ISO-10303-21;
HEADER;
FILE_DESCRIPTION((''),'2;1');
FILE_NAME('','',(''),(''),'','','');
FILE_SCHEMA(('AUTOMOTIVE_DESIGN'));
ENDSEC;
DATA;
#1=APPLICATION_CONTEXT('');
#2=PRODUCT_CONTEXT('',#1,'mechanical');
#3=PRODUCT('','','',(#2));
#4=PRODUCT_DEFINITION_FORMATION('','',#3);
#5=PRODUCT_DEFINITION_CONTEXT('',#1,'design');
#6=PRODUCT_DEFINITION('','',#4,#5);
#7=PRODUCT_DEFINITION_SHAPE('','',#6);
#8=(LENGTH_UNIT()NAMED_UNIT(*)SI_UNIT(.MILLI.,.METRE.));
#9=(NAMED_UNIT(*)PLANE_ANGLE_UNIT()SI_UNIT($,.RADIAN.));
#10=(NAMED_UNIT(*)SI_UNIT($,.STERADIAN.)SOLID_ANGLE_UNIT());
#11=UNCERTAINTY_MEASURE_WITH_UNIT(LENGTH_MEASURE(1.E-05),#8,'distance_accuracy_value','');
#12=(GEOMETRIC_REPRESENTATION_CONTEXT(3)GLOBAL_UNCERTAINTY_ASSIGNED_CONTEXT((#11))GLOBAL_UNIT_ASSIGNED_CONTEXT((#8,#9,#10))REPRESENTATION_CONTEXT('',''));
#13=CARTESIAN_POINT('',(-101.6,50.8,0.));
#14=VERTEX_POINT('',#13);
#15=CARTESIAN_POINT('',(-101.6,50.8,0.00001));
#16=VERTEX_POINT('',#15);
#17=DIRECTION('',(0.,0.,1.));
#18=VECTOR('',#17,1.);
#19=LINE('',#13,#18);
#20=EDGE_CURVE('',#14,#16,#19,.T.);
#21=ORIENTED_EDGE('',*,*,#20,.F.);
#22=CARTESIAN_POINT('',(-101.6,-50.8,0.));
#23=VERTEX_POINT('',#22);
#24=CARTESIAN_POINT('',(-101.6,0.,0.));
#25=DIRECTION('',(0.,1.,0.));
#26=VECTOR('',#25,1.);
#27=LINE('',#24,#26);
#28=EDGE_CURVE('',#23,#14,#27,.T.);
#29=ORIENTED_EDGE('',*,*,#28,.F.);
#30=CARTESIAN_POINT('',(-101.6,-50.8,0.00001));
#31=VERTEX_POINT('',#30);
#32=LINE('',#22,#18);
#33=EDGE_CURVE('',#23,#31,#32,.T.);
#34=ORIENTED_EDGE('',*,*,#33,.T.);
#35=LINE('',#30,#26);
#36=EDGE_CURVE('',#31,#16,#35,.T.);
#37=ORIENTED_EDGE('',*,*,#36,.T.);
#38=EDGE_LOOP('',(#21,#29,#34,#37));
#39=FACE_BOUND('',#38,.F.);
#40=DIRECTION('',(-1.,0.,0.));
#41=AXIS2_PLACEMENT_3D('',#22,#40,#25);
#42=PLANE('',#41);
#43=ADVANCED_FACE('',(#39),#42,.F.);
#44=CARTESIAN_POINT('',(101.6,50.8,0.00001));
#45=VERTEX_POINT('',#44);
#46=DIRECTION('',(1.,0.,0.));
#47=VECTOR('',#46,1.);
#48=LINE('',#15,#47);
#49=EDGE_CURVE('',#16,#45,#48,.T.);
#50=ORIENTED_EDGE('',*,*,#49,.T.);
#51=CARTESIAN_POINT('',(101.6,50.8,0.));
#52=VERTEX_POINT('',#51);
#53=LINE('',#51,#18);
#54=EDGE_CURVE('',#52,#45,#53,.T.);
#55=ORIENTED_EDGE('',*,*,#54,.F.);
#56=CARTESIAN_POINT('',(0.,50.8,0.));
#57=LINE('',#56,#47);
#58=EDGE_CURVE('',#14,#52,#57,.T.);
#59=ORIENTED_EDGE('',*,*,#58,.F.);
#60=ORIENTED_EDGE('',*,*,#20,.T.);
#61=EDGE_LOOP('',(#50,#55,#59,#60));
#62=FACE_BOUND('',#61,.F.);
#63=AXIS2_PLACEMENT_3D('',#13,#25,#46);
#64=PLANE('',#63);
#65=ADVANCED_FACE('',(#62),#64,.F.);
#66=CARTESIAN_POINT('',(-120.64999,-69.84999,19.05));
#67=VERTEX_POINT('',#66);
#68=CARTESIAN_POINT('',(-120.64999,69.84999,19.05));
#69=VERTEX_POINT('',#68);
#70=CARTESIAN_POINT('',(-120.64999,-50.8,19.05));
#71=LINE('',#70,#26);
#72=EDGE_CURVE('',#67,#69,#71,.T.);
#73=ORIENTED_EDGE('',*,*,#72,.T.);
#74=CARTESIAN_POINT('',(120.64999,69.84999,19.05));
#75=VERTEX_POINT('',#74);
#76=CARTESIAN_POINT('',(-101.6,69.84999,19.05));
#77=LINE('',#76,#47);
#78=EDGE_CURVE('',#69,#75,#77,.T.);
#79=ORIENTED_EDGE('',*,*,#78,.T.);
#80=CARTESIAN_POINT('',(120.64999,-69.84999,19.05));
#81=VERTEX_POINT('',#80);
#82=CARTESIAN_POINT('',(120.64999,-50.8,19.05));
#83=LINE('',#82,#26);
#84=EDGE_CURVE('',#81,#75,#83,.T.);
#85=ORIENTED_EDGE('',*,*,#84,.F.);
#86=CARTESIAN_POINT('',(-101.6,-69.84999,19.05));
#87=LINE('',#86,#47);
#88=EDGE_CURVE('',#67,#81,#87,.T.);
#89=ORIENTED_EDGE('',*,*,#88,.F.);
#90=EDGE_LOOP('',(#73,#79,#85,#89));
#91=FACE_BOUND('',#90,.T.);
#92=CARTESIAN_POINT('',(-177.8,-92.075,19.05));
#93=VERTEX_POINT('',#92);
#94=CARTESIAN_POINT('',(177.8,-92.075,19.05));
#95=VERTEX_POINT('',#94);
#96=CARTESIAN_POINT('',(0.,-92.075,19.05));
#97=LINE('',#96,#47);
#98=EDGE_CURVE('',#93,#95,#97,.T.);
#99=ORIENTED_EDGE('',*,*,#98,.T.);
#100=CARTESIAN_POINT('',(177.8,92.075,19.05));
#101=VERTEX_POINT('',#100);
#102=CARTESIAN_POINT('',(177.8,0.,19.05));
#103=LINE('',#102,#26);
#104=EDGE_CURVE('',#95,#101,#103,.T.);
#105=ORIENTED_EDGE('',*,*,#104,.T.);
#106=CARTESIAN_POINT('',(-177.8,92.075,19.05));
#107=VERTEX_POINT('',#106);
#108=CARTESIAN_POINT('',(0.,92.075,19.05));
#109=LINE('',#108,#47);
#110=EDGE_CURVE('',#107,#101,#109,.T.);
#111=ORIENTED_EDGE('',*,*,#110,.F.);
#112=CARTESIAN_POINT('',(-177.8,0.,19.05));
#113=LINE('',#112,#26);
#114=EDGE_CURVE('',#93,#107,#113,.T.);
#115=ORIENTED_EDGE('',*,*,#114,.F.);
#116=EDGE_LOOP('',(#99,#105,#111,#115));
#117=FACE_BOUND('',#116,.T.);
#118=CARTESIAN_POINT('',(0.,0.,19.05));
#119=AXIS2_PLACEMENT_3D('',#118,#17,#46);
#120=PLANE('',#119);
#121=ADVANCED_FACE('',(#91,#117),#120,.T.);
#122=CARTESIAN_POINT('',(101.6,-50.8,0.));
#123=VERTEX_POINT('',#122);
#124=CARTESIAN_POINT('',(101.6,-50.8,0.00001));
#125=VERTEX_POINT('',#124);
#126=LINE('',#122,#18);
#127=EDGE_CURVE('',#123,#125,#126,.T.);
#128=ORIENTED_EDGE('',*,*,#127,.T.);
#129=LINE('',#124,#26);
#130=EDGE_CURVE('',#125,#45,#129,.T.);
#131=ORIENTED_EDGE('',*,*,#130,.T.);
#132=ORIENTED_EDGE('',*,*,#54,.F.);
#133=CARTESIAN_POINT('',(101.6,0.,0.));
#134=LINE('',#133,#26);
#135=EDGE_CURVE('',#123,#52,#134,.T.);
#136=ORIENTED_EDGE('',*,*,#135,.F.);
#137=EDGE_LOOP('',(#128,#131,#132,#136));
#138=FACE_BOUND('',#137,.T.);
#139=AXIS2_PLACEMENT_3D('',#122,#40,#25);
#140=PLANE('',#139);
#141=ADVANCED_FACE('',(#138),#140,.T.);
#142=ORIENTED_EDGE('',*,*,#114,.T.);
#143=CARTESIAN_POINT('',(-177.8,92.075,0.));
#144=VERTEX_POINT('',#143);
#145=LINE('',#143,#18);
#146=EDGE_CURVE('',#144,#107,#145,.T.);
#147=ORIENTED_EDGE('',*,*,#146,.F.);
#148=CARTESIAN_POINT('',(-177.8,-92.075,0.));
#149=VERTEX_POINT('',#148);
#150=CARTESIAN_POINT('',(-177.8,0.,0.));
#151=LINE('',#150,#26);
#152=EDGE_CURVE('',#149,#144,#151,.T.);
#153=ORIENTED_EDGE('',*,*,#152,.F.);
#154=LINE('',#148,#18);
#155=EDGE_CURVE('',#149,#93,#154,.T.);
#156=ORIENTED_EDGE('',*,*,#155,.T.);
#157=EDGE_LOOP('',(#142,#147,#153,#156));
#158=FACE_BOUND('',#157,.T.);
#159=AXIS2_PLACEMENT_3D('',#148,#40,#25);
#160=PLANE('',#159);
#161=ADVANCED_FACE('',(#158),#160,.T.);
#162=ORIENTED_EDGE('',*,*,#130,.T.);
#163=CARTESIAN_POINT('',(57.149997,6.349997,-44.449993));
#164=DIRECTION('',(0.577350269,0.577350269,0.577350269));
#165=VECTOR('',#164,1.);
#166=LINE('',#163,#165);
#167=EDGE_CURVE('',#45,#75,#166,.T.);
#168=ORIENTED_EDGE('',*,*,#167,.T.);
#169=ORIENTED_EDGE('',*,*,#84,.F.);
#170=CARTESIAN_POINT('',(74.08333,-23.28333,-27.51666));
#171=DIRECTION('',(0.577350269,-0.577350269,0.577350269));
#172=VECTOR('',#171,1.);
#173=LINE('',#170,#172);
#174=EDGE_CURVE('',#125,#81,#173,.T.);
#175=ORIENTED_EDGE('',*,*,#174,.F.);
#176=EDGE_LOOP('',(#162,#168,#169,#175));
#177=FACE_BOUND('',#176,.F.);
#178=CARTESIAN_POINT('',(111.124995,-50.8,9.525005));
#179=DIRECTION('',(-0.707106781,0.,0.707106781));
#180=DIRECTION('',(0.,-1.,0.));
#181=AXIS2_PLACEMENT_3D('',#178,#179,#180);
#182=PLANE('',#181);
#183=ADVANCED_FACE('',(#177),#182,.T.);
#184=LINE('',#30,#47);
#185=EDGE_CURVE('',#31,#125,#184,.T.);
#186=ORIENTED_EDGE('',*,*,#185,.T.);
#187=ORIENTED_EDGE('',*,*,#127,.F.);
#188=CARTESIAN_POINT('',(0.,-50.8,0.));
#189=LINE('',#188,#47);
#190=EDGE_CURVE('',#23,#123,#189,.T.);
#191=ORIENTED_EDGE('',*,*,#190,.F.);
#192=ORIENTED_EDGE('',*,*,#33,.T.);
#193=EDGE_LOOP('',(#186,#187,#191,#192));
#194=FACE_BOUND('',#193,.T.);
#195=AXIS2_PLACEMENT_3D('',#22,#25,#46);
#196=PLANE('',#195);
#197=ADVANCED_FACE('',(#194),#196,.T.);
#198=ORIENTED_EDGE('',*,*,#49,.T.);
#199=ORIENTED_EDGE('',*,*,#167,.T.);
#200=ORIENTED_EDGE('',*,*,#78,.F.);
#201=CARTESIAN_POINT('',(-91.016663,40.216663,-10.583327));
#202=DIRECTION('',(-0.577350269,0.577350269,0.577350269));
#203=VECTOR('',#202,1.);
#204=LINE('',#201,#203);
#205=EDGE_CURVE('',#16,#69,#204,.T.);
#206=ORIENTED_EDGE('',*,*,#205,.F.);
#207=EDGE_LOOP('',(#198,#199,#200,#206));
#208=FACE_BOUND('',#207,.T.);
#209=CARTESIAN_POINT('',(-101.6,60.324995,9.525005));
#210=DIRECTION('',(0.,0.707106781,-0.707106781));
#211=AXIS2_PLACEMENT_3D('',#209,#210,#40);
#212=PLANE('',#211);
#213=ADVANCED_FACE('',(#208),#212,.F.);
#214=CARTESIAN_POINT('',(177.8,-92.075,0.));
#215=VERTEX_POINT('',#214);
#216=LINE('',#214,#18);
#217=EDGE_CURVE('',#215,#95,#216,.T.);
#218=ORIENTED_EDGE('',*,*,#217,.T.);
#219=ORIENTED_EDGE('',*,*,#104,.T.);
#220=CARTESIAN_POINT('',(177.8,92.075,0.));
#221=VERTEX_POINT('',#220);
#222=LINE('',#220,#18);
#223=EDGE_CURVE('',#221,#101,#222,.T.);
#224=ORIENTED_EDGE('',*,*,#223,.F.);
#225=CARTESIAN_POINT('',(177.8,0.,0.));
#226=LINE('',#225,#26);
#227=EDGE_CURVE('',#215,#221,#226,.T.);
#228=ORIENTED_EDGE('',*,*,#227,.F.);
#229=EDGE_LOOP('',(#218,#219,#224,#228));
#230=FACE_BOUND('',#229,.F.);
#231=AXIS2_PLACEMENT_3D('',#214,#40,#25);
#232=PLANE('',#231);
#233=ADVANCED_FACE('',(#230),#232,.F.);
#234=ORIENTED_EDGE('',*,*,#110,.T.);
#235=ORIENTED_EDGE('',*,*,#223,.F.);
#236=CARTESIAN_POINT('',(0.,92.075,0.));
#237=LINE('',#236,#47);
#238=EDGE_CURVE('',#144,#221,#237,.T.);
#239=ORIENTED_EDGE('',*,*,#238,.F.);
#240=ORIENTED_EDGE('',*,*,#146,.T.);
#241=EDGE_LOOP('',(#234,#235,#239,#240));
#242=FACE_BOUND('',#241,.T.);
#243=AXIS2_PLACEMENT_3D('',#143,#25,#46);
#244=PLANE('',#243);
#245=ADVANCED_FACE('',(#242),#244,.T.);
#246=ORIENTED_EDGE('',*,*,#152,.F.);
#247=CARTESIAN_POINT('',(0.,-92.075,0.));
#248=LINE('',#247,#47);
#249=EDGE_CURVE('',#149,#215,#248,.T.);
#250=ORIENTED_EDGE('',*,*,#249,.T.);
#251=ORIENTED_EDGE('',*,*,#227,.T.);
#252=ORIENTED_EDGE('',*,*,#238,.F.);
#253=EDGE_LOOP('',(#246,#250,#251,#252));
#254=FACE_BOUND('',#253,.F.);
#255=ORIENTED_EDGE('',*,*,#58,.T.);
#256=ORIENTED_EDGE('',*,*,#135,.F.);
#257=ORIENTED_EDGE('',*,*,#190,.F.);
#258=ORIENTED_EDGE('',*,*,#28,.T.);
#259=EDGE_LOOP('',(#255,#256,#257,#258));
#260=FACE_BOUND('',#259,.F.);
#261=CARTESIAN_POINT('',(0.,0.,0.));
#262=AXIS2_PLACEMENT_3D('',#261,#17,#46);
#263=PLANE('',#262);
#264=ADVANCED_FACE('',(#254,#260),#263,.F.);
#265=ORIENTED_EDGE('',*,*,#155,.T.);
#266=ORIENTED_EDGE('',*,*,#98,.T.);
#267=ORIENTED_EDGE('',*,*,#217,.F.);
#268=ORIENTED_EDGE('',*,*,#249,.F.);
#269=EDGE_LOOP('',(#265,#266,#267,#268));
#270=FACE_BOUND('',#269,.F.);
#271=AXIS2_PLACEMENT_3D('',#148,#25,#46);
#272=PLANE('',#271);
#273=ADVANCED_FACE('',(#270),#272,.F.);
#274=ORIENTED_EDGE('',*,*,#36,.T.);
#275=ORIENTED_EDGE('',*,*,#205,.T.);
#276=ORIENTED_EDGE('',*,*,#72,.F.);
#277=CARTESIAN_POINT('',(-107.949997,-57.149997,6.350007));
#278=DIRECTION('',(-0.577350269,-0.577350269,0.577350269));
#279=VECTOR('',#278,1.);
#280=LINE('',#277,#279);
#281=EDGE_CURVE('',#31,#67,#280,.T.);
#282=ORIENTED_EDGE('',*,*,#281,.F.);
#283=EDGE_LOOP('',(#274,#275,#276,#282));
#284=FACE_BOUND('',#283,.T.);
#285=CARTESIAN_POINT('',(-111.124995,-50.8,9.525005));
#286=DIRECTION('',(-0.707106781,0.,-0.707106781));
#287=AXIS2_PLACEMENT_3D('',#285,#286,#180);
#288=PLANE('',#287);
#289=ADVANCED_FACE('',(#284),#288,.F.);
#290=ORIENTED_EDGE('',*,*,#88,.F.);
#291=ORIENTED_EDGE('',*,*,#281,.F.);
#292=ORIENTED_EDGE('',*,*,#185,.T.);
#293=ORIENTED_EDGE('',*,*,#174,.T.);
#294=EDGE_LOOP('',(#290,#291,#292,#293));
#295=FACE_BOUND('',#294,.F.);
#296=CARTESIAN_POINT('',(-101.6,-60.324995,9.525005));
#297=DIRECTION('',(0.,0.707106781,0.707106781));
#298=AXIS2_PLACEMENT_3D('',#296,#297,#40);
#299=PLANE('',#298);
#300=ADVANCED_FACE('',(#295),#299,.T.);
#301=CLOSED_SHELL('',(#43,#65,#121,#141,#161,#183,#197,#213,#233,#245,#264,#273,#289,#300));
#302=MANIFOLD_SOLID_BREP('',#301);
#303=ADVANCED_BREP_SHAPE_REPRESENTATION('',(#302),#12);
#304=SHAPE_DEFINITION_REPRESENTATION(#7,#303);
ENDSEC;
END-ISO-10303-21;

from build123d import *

# Parameters (mm, degrees)
F0_W     = 355.6
F0_H     = 184.15
F0_W_2   = 203.2
F0_H_2   = 101.6
F1_DEPTH = 19.05
F2_SIZE2 = 19.04999
F2_SIZE  = 19.04999


# Not quite as in the source:
# - a fillet or chamfer is up to 0.001 mm smaller than in the source, because OpenCascade refuses the exact size


with BuildPart() as f1:
    # F0 (on Top) → F1 (new body)
    with BuildSketch(Plane.XY):
        Rectangle(F0_W, F0_H)
        Rectangle(F0_W_2, F0_H_2, mode=Mode.SUBTRACT)
    extrude(amount=F1_DEPTH)

    # F2 (size 19.05 and 19.05 in the source; OpenCascade refuses exactly that, so slightly less here)
    f2_edges = [f1.edges().sort_by_distance(p)[0] for p in [
        (-101.6, 0, 19.05),
        (0, 50.8, 19.05),
        (101.6, 0, 19.05),
        (0, -50.8, 19.05),
    ]]
    chamfer(f2_edges, length=F2_SIZE, length2=F2_SIZE2)


solid = f1.part
